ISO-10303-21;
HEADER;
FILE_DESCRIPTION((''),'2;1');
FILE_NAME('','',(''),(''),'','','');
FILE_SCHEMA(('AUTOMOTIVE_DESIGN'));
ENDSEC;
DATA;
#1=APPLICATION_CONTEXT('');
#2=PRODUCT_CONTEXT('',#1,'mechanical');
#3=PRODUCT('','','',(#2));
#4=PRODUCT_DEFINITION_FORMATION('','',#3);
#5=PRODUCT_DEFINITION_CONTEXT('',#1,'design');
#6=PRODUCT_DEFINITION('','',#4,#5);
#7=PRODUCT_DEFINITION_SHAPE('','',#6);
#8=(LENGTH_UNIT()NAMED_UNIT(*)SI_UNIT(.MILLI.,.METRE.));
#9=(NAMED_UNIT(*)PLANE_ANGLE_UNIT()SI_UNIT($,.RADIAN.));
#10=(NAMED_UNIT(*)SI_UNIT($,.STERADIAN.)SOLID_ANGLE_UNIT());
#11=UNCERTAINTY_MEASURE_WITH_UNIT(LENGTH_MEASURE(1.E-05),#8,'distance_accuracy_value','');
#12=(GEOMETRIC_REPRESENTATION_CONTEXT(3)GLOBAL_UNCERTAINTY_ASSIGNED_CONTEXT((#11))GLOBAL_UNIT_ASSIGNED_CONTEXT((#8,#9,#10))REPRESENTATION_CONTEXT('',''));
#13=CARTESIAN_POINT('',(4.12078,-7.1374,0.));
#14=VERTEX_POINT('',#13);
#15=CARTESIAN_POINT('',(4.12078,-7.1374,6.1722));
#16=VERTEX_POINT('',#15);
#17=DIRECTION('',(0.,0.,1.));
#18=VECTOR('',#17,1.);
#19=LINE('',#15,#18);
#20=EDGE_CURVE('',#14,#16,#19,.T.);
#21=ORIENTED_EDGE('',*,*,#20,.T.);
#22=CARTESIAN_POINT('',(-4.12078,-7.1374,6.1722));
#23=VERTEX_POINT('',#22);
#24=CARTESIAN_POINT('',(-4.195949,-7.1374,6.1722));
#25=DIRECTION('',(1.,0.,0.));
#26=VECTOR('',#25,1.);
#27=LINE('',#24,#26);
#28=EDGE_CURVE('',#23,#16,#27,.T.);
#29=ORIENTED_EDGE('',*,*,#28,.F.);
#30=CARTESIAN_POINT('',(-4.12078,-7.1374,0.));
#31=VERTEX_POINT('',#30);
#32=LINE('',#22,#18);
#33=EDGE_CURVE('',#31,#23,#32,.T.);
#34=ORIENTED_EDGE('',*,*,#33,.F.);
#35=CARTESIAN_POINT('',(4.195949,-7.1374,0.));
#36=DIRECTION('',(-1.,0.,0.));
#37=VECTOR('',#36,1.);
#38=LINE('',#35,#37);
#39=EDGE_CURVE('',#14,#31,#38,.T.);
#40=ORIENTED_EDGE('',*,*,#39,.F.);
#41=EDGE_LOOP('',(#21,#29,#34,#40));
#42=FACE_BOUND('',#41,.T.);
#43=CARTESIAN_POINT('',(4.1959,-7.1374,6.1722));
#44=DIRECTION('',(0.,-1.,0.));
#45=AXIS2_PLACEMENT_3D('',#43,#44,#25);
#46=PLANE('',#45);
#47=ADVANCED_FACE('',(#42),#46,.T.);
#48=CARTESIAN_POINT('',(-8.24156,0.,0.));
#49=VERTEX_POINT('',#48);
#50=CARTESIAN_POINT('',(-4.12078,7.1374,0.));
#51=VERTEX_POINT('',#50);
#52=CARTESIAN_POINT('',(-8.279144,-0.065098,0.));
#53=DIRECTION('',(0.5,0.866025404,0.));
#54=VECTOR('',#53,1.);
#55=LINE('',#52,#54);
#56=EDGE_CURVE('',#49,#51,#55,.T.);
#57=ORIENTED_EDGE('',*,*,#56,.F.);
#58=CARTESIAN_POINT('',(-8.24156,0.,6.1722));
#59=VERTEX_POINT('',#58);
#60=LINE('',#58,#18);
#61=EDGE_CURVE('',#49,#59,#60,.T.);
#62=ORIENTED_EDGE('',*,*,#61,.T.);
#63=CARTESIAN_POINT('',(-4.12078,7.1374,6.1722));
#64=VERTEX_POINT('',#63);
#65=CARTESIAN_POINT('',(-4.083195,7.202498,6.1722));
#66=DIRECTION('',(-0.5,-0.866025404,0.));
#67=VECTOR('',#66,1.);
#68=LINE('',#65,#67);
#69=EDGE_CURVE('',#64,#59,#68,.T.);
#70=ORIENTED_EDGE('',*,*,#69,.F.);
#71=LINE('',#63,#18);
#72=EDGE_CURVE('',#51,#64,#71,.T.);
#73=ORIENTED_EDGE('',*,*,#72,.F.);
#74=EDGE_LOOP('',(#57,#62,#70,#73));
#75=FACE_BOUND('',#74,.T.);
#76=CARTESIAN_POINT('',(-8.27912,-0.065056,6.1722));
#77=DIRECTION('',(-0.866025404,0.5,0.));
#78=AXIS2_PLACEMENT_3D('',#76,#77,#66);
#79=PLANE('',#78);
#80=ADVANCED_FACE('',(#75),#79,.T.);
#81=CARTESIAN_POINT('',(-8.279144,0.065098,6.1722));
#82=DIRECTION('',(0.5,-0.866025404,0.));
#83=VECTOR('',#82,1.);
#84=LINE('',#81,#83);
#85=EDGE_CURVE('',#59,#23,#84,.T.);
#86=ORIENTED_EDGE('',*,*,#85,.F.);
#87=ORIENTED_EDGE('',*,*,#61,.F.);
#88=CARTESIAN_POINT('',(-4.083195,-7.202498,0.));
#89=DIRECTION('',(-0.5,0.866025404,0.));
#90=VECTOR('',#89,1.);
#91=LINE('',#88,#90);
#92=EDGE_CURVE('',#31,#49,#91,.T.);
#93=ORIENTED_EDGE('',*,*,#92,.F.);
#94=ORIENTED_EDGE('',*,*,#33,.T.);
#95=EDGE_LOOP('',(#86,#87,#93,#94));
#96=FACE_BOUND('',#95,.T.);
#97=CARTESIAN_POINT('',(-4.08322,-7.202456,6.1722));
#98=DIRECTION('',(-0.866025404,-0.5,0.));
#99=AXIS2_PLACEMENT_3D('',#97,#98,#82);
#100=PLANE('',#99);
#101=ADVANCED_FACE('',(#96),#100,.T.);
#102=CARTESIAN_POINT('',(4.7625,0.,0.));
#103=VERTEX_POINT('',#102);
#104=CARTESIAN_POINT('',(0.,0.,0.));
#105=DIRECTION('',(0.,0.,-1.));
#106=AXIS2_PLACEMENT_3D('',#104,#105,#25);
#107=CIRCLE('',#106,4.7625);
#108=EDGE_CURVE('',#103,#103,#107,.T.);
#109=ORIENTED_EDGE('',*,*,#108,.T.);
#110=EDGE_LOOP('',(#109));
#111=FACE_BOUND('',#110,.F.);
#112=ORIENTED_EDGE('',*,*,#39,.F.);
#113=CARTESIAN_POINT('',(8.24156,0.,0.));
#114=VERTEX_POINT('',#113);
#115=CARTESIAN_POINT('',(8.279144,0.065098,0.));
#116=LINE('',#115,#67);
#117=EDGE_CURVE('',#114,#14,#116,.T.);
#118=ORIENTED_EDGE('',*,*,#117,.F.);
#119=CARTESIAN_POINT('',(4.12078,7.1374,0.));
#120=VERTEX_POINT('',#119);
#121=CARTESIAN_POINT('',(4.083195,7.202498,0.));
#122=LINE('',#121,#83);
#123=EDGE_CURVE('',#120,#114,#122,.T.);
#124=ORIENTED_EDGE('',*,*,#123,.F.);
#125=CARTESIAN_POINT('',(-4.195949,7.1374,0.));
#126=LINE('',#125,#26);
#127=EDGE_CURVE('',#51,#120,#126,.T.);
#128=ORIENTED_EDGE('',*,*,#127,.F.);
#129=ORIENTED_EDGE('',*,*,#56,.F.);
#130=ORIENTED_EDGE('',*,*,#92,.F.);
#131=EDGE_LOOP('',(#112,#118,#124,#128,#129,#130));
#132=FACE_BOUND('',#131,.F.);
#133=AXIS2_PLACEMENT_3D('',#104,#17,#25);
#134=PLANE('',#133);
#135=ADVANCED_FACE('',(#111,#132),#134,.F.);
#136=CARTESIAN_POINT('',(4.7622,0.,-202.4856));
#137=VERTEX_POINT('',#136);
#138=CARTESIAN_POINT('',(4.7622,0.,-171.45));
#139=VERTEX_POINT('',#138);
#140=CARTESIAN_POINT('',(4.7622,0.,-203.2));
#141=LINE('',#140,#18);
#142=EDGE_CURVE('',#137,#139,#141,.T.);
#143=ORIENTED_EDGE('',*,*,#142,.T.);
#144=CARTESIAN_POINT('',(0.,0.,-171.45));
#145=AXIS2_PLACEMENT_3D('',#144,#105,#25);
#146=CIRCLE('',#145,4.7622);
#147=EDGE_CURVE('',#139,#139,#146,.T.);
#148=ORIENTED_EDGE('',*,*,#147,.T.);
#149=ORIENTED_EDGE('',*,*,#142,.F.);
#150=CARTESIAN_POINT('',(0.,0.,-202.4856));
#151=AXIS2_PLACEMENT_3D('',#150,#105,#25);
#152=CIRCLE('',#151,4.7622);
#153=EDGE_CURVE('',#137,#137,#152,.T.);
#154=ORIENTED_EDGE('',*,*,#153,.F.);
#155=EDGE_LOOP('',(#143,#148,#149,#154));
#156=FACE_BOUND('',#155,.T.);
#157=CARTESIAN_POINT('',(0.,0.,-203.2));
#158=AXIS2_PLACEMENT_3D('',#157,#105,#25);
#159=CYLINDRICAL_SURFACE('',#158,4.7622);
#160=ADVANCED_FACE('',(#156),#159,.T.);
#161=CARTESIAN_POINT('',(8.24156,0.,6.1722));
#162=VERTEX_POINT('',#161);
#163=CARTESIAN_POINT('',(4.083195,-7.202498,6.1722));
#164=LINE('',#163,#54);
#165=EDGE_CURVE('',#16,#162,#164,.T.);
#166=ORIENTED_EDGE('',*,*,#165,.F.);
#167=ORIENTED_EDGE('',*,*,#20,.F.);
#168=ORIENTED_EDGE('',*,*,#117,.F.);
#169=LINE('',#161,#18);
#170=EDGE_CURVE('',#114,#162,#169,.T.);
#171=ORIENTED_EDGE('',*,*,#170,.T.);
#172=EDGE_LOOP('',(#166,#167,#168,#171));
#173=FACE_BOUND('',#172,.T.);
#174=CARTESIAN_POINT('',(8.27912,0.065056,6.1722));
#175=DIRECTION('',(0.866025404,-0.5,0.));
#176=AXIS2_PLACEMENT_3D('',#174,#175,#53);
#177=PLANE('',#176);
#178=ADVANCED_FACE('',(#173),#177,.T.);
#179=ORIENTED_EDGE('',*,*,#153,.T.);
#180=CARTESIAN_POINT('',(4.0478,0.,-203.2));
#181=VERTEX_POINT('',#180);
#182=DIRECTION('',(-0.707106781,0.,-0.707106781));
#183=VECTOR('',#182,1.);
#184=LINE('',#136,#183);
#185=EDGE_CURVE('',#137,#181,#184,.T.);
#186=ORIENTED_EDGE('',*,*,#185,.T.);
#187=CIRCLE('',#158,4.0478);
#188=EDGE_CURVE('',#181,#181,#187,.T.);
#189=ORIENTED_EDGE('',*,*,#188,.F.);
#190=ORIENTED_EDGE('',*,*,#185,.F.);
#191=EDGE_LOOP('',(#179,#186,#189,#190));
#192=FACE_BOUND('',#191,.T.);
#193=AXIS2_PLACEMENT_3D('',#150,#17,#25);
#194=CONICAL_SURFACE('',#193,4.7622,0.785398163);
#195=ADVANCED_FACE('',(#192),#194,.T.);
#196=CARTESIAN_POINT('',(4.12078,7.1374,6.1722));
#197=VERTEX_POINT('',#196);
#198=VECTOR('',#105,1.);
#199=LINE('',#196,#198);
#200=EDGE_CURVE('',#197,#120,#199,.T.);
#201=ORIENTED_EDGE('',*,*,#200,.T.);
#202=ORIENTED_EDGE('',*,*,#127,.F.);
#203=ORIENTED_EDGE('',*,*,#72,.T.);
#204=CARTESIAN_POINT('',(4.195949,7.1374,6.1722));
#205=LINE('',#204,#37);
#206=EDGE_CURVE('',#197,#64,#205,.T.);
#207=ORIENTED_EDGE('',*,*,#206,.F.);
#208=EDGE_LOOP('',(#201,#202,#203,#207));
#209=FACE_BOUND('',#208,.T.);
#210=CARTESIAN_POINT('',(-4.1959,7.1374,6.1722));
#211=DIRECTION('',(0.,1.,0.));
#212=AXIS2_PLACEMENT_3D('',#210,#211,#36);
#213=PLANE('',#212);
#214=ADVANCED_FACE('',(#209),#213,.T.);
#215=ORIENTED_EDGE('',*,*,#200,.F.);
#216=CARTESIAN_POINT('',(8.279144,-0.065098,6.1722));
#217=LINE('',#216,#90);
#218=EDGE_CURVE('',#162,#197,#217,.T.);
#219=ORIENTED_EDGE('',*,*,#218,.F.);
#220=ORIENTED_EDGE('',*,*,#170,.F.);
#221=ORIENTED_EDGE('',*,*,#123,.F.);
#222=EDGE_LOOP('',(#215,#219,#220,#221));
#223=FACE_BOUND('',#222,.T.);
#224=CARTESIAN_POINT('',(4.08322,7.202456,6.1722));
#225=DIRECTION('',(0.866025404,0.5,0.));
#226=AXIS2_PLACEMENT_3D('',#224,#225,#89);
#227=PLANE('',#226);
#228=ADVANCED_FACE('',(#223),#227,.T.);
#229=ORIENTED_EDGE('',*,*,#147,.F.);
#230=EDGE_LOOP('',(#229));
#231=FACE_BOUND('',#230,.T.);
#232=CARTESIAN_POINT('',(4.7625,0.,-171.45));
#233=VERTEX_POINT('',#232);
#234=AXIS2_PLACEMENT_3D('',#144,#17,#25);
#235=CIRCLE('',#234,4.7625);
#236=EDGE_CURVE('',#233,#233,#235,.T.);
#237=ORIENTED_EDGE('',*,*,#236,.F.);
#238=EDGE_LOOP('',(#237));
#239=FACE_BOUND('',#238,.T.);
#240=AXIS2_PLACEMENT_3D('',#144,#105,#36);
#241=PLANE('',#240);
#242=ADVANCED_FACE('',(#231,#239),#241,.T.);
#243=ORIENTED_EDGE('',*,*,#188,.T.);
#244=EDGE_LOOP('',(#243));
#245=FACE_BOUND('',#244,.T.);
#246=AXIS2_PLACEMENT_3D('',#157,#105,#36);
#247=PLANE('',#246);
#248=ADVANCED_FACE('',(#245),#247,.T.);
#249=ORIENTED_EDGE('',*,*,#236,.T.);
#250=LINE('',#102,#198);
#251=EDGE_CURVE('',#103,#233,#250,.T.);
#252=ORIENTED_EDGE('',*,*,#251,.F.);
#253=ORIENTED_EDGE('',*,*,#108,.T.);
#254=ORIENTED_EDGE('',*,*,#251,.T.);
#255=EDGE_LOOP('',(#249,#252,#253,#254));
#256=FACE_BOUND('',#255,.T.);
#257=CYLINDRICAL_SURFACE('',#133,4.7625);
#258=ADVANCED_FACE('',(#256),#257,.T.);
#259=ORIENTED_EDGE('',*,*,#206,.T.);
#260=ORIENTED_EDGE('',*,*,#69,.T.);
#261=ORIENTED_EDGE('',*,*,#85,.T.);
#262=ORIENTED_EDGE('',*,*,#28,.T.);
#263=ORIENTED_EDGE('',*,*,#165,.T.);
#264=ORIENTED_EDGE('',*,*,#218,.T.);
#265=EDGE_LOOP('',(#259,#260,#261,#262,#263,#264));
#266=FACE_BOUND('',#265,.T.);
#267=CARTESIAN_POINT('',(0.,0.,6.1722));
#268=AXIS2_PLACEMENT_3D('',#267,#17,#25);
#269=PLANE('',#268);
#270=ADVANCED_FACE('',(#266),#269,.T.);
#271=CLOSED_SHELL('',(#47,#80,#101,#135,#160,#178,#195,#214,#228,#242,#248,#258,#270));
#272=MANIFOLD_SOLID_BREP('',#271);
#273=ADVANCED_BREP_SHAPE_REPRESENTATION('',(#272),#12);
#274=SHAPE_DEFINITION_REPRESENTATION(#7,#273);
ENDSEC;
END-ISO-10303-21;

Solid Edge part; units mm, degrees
sketch "Sketch1" plane through (0, 0, 0) normal (0, 0, 1) x (1, 0, 0)
  circle A0 centre (0, 0) radius 8.2794
  dimension "D1" = 16.5588
extrude "Protrusion1" add sketch "Sketch1" along normal blind 6.1722
sketch "Sketch2" plane through (0, 0, 0) normal (0, 0, -1) x (1, 0, 0)
  circle A0 centre (0, 0) radius 4.7625
extrude "Protrusion2" add sketch "Sketch2" along normal blind 203.2
sketch "Sketch3" plane through (0, 0, -203.2) normal (0, 0, -1) x (1, 0, 0)
  circle A0 centre (0, 0) radius 4.7622
extrude "Cutout1" cut sketch "Sketch3" against normal blind 31.75 flip side to cut
chamfer "Chamfer_1" distance 0.7144 angle 45 1 edges at (-4.7622, 0, -203.2)
sketch "Sketch4" plane through (0, 0, 6.1722) normal (0, 0, 1) x (1, 0, 0)
  line L0 (-4.1959, 7.1374) -> (4.1959, 7.1374)
  dimension "D1" = 14.2748
extrude "Cutout2" cut sketch "Sketch4" against normal up to next material side at (0, 7.1874, 6.1722)
pattern_circular "Pattern1" count 6 over 360 about axis through (0, 0, 6.1722) along (0, 0, 1) of "Cutout2"
properties part number "115898"
